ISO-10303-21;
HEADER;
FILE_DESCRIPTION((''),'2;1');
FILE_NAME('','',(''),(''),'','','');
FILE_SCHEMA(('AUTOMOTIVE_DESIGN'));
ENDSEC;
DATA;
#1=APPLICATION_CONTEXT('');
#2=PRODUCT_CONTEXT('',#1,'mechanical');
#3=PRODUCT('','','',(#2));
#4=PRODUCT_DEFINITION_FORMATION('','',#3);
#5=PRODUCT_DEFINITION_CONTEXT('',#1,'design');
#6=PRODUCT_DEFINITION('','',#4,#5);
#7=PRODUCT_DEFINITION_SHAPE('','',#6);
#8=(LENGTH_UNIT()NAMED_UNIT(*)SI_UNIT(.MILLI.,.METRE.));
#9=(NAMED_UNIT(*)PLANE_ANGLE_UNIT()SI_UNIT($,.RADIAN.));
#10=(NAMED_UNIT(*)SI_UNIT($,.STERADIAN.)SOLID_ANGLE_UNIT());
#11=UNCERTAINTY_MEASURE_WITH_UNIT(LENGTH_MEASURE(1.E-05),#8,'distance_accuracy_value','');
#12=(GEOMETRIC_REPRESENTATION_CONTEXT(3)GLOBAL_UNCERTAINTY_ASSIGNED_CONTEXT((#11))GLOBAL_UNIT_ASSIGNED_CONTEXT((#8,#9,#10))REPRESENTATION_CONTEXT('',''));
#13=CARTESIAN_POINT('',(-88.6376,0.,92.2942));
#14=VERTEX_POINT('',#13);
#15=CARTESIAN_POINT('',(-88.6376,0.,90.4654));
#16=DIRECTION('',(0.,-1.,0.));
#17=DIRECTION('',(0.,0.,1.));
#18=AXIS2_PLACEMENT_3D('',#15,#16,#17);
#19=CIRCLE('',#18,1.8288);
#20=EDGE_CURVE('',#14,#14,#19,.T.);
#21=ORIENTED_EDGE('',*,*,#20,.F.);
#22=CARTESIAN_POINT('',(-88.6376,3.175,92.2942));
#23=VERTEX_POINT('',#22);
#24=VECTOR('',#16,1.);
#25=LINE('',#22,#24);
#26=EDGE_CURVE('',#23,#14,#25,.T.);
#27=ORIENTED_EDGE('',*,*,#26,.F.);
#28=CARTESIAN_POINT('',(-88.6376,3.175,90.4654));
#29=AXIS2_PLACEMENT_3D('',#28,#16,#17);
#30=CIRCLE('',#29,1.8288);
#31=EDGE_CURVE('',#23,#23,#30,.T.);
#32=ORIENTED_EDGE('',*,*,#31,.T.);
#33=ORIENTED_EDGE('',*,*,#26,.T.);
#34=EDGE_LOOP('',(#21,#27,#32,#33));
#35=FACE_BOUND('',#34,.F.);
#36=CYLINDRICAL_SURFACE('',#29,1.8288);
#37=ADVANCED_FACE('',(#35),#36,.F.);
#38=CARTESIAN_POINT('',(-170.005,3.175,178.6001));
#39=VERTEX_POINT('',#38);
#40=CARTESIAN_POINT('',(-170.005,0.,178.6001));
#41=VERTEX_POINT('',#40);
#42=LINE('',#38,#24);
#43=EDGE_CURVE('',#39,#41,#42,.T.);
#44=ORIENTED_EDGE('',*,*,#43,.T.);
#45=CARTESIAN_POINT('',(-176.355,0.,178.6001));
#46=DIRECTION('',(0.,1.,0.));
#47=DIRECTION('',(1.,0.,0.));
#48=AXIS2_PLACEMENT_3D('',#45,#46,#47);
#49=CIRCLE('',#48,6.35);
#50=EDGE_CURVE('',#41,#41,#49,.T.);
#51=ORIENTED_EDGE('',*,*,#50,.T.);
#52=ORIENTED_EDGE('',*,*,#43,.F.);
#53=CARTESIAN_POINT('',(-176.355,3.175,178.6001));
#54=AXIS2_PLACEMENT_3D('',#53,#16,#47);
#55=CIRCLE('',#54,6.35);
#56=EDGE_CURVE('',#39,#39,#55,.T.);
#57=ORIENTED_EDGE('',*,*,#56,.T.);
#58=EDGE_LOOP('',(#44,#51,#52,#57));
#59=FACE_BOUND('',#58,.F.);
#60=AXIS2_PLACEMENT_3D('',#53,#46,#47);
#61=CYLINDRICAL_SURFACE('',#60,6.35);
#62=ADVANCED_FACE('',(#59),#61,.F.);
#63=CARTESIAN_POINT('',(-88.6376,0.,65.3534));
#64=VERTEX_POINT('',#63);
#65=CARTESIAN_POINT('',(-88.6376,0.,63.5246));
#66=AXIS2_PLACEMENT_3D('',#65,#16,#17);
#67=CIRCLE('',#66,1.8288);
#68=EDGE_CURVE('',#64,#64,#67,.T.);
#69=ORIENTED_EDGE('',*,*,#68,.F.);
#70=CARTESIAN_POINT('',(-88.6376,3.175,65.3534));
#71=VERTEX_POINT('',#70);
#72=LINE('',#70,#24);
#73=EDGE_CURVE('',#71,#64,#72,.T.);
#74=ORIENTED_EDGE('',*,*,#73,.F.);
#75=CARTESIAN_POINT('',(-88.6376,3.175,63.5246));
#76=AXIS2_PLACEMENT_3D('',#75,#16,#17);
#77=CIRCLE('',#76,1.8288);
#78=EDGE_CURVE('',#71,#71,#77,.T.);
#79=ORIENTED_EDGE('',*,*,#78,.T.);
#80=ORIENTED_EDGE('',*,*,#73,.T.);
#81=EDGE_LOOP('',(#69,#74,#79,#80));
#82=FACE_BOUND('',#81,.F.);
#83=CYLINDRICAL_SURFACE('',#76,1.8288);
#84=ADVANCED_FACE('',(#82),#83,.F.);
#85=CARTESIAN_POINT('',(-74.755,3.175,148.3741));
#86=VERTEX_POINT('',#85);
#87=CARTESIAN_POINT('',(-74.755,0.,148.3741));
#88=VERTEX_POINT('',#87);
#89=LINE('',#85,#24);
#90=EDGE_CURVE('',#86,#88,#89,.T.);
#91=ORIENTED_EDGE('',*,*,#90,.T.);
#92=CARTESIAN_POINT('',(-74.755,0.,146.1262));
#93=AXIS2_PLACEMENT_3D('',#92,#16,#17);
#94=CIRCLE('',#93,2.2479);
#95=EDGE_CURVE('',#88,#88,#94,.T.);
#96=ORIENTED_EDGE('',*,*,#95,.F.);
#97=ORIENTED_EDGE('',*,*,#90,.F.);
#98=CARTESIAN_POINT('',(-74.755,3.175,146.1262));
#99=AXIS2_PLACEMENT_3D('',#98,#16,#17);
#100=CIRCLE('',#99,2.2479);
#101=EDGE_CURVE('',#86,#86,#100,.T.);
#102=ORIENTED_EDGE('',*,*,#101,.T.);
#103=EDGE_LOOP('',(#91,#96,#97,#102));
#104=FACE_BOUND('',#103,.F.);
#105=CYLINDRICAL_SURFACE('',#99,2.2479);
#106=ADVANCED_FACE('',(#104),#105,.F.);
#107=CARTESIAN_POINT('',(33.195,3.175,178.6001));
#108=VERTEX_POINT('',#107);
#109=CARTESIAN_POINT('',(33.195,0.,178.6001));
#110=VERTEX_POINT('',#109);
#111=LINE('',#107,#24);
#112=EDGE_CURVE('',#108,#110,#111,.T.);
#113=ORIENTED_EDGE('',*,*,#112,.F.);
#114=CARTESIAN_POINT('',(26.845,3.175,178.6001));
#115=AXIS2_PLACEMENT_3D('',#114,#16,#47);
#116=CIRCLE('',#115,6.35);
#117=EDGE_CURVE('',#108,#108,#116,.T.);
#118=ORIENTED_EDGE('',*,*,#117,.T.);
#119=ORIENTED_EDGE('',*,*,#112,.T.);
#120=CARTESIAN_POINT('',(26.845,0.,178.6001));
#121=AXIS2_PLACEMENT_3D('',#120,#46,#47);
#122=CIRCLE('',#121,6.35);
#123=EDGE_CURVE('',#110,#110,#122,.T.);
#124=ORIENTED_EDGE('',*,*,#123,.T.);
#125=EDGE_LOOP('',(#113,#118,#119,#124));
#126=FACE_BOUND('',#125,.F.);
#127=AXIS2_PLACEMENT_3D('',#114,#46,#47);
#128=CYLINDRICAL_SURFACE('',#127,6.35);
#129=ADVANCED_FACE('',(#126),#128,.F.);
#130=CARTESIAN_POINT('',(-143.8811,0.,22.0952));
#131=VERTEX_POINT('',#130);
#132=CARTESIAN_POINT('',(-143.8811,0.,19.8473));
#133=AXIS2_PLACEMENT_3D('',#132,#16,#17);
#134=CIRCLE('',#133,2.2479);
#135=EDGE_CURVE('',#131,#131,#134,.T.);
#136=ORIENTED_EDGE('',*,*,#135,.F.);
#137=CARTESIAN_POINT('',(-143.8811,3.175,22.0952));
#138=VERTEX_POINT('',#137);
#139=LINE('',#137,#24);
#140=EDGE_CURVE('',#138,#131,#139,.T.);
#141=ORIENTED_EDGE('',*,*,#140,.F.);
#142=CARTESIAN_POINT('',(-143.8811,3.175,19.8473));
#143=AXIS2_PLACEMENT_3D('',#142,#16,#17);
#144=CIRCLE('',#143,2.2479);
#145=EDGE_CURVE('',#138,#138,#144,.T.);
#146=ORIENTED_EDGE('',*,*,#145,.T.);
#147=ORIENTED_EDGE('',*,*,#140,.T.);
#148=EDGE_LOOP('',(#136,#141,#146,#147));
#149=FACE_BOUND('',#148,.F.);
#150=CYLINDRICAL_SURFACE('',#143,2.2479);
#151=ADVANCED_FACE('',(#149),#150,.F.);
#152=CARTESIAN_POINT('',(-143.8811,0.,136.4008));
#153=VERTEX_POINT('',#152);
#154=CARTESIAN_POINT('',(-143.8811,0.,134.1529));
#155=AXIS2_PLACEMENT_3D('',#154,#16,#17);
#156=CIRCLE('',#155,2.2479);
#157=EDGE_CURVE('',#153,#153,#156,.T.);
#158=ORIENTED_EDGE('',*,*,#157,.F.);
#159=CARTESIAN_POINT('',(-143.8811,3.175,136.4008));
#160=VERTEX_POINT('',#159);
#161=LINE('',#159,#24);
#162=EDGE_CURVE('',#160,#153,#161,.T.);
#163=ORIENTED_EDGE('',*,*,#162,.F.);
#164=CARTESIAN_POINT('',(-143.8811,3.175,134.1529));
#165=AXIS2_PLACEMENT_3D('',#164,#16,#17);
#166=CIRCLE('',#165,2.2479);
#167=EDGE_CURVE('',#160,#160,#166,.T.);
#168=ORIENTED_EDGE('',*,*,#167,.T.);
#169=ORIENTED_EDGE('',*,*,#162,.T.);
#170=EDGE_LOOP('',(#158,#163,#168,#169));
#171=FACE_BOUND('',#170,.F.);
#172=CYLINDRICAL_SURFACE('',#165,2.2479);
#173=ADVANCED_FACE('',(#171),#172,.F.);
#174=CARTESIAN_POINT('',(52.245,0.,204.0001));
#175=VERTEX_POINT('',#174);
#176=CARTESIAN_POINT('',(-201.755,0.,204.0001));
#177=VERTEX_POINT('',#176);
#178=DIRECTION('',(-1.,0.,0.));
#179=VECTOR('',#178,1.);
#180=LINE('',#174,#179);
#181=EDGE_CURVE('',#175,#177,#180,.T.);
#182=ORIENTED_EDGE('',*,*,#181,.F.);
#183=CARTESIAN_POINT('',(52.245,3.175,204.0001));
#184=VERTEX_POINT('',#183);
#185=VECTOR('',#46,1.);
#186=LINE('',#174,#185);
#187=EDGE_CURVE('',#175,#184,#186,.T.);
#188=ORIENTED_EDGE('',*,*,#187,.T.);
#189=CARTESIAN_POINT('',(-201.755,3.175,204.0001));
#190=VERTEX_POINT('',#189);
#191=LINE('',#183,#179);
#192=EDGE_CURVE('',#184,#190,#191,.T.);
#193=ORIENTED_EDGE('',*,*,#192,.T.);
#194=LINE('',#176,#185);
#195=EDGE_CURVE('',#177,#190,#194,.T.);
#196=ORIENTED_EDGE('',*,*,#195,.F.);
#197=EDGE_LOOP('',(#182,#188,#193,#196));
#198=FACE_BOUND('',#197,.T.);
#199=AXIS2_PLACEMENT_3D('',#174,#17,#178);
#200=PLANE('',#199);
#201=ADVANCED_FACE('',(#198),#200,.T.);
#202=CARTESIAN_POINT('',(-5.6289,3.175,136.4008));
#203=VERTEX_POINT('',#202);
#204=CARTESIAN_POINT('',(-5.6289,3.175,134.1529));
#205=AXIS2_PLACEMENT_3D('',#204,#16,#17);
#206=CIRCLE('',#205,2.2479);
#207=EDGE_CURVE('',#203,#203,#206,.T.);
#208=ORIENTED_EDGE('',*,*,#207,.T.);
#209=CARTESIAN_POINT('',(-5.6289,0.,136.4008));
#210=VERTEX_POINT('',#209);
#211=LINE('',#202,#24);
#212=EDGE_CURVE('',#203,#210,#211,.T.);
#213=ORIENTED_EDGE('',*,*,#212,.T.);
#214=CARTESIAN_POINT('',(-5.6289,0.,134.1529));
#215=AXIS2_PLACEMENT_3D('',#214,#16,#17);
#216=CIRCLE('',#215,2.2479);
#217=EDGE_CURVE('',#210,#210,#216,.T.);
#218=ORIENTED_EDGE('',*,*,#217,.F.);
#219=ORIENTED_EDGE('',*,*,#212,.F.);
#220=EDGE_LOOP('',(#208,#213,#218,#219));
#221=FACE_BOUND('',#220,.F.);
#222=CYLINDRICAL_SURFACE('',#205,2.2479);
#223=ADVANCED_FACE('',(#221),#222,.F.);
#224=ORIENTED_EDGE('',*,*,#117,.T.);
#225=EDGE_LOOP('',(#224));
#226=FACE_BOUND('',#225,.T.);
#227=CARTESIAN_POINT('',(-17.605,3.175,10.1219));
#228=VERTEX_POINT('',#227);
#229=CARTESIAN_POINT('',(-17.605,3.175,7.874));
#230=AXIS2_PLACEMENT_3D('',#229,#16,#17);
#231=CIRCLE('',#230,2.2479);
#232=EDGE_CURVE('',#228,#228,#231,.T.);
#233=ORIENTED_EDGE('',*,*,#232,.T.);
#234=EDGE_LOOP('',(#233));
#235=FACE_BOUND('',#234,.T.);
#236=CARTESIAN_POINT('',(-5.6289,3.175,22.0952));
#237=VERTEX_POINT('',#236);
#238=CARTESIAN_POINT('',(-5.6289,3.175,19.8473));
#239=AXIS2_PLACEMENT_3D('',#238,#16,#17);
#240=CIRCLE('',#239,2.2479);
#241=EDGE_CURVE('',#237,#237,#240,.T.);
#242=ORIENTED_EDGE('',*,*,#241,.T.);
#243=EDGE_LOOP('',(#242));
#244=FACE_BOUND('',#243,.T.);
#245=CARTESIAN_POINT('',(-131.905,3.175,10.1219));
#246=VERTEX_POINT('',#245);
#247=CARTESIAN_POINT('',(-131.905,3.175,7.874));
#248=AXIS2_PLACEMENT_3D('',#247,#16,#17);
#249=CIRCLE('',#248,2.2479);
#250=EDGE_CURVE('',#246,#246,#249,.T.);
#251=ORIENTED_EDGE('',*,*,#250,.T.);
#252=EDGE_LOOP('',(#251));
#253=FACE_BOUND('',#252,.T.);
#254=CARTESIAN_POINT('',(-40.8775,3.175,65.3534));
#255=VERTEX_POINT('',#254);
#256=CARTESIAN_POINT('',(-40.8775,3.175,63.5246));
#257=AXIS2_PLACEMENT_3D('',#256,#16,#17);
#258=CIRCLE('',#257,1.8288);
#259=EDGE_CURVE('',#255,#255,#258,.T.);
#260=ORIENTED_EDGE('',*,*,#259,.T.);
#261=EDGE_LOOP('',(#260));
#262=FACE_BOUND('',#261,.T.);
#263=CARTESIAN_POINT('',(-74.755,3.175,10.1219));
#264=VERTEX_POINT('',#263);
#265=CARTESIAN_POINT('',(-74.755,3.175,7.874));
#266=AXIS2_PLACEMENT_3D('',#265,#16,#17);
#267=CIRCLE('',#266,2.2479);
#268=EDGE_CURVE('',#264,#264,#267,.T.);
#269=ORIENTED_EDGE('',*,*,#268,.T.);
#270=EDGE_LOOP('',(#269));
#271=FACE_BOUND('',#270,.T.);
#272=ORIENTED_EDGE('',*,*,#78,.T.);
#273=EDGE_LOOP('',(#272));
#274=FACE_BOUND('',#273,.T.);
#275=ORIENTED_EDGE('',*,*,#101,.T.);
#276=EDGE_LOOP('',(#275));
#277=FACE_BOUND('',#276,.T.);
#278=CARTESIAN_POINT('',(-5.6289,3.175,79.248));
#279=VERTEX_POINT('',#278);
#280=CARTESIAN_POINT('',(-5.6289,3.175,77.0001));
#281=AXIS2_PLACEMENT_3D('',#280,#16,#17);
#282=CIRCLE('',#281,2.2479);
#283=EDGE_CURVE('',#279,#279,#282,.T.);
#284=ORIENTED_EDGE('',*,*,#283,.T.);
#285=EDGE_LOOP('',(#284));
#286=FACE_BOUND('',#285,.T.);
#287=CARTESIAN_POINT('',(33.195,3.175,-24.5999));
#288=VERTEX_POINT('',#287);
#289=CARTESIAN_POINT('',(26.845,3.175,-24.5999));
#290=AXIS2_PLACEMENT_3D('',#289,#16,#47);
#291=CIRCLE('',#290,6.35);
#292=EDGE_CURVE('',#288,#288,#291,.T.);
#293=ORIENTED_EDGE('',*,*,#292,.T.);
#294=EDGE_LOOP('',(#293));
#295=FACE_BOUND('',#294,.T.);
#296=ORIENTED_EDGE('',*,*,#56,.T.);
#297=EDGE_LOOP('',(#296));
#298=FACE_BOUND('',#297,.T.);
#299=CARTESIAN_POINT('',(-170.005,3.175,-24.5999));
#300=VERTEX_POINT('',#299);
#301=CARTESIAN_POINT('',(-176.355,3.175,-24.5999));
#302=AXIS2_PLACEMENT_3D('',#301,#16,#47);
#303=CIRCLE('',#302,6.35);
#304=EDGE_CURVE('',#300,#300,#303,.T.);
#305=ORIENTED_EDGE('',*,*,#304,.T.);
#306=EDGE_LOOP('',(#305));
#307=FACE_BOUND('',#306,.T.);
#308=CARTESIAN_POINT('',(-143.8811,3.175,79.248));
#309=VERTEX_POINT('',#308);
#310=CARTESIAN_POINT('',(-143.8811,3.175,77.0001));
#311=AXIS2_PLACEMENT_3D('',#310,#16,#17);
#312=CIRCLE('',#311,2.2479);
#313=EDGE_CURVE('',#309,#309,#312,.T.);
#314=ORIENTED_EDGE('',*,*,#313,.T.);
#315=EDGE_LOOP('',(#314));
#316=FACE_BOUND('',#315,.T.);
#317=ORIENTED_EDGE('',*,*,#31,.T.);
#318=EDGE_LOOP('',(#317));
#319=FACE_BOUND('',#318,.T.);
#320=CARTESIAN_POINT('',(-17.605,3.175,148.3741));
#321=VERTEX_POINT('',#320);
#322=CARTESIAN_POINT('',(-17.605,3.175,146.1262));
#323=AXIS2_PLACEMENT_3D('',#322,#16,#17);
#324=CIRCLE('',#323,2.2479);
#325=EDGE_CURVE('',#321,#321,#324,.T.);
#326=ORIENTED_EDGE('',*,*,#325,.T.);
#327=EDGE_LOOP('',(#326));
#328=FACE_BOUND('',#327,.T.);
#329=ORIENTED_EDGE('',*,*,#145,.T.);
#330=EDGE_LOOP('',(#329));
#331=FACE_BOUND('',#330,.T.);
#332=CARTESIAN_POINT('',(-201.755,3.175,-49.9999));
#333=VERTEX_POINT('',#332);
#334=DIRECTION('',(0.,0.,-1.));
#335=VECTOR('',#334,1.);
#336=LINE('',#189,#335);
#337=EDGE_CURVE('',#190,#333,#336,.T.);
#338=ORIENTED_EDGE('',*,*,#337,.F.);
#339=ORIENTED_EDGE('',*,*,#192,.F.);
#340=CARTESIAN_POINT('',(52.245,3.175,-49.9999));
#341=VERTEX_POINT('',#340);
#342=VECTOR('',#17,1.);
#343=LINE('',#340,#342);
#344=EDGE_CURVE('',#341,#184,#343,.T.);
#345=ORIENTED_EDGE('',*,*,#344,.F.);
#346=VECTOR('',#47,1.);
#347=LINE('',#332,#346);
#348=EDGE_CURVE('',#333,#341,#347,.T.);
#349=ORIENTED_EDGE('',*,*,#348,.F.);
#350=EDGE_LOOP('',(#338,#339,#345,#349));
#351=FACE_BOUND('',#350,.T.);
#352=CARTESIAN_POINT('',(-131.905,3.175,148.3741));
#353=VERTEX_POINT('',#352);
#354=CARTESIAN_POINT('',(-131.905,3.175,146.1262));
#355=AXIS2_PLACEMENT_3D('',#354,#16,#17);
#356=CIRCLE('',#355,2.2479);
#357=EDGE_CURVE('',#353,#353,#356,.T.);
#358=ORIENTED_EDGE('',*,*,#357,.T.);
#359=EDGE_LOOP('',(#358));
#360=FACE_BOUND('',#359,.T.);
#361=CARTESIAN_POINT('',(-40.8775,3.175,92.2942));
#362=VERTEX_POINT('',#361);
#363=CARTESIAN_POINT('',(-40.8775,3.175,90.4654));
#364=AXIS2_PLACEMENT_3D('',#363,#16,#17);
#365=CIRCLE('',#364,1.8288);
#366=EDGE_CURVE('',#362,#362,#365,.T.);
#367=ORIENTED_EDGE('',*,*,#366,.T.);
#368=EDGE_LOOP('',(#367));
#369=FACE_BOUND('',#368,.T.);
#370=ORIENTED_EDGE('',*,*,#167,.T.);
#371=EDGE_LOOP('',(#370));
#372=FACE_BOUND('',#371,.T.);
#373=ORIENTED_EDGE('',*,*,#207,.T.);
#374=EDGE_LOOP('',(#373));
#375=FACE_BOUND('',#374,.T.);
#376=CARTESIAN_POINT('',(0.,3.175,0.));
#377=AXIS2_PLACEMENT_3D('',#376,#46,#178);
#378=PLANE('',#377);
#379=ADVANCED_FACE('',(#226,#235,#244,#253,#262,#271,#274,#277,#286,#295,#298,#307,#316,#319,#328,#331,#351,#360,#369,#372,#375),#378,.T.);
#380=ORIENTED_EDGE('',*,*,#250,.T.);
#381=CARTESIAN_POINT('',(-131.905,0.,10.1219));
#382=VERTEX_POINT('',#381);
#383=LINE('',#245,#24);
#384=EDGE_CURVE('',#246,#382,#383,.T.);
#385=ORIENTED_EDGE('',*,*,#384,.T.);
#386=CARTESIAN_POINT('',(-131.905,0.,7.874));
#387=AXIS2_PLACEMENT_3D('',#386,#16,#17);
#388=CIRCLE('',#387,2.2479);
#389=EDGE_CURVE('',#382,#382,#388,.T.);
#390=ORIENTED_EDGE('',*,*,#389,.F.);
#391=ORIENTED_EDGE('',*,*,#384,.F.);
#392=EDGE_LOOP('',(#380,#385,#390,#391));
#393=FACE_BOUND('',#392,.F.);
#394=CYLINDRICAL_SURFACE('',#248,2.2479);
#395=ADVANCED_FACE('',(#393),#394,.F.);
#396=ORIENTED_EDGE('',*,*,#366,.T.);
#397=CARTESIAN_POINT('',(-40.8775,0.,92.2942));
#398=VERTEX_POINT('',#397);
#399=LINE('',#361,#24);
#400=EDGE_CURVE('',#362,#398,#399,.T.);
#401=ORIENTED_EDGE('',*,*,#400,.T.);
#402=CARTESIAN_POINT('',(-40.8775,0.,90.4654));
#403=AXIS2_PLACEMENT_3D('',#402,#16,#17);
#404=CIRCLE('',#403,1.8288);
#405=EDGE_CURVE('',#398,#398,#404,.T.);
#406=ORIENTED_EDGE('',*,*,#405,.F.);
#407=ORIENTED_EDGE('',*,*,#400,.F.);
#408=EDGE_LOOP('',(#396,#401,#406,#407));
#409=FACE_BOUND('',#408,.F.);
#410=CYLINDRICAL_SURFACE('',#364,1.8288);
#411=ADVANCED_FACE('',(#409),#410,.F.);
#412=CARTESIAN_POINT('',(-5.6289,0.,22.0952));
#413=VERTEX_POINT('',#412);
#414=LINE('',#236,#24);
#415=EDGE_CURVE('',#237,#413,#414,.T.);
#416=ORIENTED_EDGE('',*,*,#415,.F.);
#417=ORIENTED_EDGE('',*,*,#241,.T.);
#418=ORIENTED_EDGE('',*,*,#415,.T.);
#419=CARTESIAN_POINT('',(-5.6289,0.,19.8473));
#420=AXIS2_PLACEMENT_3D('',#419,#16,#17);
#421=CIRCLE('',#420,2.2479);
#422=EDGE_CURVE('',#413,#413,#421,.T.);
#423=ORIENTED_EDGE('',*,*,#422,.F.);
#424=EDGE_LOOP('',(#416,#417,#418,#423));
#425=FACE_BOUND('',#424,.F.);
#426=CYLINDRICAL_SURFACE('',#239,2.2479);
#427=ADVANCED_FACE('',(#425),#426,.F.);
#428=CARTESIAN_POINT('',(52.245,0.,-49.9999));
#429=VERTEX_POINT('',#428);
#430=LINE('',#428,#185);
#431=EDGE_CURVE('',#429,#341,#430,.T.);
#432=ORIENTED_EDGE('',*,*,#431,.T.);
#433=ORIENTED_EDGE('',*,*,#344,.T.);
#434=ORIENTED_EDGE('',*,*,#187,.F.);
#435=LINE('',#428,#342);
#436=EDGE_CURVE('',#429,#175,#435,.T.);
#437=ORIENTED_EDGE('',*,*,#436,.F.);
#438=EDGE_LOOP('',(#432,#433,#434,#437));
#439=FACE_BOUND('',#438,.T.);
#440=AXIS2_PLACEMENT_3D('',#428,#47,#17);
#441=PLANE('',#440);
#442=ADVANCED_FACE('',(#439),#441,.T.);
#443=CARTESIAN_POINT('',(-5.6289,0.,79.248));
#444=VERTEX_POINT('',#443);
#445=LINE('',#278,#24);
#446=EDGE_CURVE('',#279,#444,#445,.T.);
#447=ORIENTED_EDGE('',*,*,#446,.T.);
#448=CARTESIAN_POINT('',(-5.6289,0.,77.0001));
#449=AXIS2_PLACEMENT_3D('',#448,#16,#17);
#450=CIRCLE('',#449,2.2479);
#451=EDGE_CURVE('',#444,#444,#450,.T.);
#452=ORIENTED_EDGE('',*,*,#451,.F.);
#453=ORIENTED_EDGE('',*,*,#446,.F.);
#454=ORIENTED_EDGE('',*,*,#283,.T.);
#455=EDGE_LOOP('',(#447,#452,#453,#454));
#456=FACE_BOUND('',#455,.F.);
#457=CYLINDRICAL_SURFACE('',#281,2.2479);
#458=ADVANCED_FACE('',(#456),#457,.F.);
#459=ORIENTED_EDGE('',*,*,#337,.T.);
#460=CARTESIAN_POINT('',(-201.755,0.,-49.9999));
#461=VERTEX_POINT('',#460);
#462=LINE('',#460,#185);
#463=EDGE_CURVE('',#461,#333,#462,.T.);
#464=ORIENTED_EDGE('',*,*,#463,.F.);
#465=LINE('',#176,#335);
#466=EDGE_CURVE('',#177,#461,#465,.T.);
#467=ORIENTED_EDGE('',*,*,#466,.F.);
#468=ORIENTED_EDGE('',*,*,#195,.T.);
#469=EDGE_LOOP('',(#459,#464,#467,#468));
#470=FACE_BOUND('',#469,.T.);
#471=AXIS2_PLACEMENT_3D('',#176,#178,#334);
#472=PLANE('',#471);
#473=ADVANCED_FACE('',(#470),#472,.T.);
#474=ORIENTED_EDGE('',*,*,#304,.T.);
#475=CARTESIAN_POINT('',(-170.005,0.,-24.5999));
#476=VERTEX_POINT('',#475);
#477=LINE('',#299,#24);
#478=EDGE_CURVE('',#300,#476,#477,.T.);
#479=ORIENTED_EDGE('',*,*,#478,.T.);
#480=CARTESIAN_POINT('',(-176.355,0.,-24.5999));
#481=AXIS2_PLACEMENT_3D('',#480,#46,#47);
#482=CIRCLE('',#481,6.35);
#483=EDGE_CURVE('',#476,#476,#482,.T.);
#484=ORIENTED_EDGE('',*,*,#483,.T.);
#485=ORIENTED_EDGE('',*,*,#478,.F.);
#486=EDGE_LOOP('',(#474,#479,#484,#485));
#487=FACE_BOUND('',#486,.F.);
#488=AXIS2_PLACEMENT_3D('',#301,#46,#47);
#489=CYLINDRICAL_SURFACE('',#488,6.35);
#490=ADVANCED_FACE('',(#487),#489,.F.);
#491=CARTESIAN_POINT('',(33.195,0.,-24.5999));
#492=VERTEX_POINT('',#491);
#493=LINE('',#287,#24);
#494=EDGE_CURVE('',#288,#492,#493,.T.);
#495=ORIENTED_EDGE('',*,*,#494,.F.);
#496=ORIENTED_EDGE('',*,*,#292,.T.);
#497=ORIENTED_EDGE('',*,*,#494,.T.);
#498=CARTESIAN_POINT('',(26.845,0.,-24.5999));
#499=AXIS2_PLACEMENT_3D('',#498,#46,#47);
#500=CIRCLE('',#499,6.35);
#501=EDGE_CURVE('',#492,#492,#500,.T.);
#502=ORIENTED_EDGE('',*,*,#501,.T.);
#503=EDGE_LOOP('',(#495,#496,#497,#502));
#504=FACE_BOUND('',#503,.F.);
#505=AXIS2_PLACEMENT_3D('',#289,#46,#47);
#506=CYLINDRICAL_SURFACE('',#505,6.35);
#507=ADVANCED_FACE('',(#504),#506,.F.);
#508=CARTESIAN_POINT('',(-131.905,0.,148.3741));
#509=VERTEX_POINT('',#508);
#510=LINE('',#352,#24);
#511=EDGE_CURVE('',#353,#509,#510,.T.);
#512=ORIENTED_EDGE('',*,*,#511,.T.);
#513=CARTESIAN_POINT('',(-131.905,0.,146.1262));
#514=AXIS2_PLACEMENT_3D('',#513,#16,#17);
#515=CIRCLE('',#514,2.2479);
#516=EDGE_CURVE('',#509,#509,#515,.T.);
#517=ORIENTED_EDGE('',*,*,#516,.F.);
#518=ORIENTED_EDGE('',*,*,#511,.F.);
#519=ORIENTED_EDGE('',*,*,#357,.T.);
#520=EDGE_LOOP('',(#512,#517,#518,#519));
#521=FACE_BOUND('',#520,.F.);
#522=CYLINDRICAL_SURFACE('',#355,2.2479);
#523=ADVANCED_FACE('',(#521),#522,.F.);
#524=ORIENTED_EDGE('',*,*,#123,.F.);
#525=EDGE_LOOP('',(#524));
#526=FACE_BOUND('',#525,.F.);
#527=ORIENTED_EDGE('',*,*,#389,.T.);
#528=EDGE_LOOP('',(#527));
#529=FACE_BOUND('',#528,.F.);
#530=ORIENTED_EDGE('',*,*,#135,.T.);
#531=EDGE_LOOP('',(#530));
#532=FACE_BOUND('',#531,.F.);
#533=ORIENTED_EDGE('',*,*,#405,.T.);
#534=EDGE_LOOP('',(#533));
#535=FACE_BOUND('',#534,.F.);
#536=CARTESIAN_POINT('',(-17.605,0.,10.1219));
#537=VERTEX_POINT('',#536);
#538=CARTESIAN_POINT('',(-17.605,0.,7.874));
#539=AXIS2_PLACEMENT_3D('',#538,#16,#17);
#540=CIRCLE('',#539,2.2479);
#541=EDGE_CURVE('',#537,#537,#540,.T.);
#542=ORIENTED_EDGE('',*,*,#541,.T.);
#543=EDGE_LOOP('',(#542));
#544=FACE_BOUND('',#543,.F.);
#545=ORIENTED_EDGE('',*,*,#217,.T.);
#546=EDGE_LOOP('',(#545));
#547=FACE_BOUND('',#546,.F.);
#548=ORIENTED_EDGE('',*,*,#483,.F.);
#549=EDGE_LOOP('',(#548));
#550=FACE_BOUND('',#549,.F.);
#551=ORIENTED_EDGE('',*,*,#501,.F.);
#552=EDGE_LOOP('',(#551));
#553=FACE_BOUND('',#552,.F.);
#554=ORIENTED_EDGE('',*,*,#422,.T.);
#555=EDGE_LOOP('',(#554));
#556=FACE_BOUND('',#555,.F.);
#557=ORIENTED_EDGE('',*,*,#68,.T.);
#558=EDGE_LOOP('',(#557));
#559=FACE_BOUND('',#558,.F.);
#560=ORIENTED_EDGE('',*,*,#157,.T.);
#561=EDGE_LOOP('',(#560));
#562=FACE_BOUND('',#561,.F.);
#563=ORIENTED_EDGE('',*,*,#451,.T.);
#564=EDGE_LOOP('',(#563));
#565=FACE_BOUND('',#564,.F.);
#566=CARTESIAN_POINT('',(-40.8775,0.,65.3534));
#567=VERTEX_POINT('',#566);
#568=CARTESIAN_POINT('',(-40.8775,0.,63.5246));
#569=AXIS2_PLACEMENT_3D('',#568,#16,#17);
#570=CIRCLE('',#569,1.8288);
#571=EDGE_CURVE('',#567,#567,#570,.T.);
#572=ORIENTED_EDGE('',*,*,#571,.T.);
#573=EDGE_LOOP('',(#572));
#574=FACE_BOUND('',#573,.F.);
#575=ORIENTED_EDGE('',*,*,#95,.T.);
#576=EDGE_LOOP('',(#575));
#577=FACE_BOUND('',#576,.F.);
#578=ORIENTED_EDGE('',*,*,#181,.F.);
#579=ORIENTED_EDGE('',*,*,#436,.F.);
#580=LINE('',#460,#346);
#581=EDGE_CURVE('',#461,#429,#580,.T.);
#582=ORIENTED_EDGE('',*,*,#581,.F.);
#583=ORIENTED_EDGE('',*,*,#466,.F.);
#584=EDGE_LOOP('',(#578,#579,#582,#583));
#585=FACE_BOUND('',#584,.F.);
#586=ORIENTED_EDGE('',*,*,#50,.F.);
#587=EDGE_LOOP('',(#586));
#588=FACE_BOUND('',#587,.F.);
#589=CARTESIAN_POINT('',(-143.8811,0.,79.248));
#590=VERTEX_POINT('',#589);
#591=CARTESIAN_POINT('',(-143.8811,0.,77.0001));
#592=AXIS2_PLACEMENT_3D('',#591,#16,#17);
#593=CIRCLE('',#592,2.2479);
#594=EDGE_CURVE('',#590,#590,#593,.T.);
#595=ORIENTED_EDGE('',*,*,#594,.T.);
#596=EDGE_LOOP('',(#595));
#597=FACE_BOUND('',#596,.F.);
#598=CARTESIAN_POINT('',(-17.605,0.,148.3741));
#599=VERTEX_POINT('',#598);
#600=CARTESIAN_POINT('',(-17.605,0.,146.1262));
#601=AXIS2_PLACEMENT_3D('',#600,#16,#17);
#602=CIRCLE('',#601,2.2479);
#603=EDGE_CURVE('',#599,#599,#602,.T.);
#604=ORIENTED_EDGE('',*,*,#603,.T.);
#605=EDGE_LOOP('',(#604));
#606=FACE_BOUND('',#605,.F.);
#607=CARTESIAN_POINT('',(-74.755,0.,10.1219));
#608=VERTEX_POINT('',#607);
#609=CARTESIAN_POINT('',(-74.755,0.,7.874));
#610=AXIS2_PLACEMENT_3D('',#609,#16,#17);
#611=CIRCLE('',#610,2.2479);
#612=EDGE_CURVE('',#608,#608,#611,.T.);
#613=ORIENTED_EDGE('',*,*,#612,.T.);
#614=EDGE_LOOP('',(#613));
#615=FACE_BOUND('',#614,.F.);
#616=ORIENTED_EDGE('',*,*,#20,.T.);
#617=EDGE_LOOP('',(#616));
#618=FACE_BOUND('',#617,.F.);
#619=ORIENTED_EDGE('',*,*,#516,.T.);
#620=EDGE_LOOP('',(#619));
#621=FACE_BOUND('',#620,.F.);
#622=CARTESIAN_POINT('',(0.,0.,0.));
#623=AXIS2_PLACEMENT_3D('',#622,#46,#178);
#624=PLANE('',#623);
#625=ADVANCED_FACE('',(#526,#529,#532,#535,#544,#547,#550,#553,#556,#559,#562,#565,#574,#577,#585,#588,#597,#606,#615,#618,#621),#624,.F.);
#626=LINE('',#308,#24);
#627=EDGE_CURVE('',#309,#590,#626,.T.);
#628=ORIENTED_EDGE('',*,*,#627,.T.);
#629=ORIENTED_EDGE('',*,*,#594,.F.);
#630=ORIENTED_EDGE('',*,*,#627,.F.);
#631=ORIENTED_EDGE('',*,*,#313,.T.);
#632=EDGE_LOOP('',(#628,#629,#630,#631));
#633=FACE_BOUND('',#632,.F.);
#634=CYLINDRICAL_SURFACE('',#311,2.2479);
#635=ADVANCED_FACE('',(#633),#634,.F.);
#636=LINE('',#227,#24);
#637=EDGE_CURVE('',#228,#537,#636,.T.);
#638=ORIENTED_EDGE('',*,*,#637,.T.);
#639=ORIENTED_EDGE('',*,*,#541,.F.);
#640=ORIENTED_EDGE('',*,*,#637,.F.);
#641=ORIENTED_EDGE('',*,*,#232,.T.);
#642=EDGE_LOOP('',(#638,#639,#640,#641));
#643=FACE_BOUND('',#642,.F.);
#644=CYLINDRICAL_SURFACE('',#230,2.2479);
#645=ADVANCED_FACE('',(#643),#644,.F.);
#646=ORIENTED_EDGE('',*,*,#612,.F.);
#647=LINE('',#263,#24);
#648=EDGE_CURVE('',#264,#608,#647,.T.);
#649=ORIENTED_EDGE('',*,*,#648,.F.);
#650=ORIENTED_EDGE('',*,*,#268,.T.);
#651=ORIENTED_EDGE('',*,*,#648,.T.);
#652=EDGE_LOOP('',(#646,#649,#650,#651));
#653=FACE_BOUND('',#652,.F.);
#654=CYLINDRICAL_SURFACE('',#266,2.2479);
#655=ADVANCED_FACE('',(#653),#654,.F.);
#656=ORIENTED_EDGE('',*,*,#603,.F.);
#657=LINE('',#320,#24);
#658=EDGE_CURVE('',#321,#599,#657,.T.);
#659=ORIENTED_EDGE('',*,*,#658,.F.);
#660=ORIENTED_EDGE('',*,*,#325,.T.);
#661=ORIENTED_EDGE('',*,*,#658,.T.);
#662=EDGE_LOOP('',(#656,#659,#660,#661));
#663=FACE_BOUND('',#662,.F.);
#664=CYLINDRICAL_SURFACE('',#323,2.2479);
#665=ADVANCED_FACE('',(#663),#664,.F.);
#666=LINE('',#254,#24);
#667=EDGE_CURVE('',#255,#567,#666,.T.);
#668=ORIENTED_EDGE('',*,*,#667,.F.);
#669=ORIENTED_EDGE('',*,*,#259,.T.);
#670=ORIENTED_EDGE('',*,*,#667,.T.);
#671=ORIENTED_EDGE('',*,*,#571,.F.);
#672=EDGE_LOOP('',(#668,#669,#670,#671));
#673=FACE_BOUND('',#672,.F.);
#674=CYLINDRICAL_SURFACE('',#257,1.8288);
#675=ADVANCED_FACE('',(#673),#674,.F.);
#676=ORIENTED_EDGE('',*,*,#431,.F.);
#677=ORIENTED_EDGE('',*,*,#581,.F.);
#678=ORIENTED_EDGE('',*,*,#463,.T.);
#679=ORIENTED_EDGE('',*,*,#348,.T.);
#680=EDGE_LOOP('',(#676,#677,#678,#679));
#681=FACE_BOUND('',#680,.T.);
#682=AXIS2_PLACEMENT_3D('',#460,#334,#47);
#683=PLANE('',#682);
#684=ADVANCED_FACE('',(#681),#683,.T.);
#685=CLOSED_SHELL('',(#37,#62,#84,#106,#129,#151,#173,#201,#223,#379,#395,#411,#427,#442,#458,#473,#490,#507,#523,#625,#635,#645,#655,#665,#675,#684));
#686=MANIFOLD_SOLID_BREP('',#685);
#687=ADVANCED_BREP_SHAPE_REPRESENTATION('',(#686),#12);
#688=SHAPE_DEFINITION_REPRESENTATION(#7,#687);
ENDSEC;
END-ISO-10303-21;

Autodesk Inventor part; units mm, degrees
ref_plane "YZ Plane" through (0, 0, 0) normal (1, 0, 0) x (0, 1, 0)
ref_plane "XZ Plane" through (0, 0, 0) normal (0, 1, 0) x (-1, 0, 0)
ref_plane "XY Plane" through (0, 0, 0) normal (0, 0, 1) x (1, 0, 0)
sketch "Sketch1" plane through (0, 0, 0) normal (0, 1, 0) x (-1, 0, 0)
  line L0 (-2.2451, 151.7551) -> (-2.2451, 2.2451)
  line L1 (16.8049, 21.2951) -> (-2.2451, 2.2451)
  line L2 (16.8049, 132.7051) -> (16.8049, 21.2951)
  line L3 (-2.2451, 151.7551) -> (16.8049, 132.7051)
  line L4 (0, 0) -> (149.5101, 0)
  line L5 (130.4601, 19.05) -> (149.5101, 0)
  line L6 (19.05, 19.05) -> (130.4601, 19.05)
  line L7 (0, 0) -> (19.05, 19.05)
  line L8 (151.7551, 2.2451) -> (151.7551, 151.7551)
  line L9 (132.7051, 132.7051) -> (151.7551, 151.7551)
  line L10 (132.7051, 21.2951) -> (132.7051, 132.7051)
  line L11 (151.7551, 2.2451) -> (132.7051, 21.2951)
  line L12 (149.5101, 154.0002) -> (0, 154.0002)
  line L13 (19.05, 134.9502) -> (0, 154.0002)
  line L14 (130.4601, 134.9502) -> (19.05, 134.9502)
  line L15 (149.5101, 154.0002) -> (130.4601, 134.9502)
  line L16 (9.525, 144.4752) -> (139.9851, 144.4752) construction
  line L17 (149.5101, 154.0002) -> (130.4601, 134.9502) construction
  line L18 (151.7551, 151.7551) -> (132.7051, 132.7051) construction
  line L19 (142.2301, 142.2301) -> (142.2301, 11.7701) construction
  line L20 (130.4601, 19.05) -> (149.5101, 0) construction
  line L21 (139.9851, 9.525) -> (9.525, 9.525) construction
  line L22 (0, 0) -> (19.05, 19.05) construction
  line L23 (-2.2451, 2.2451) -> (16.8049, 21.2951) construction
  line L24 (7.2799, 11.7701) -> (7.2799, 142.2301) construction
  circle A0 centre (142.2301, 77.0001) radius 3.175
  circle A1 centre (74.755, 9.525) radius 3.175
  circle A2 centre (7.2799, 77.0001) radius 3.175
  circle A3 centre (74.755, 144.4752) radius 3.175
  circle A4 centre (112.855, 144.4752) radius 3.175
  circle A5 centre (36.655, 144.4752) radius 3.175
  circle A6 centre (74.755, 144.4752) radius 3.175
  circle A7 centre (7.2799, 38.9001) radius 3.175
  circle A8 centre (7.2799, 115.1001) radius 3.175
  circle A9 centre (7.2799, 77.0001) radius 3.175
  circle A10 centre (142.2301, 115.1001) radius 3.175
  circle A11 centre (142.2301, 38.9001) radius 3.175
  circle A12 centre (142.2301, 77.0001) radius 3.175
  circle A13 centre (36.655, 9.525) radius 3.175
  circle A14 centre (112.855, 9.525) radius 3.175
  circle A15 centre (74.755, 9.525) radius 3.175
  circle A16 centre (74.755, 77.0001) radius 57.9501 construction
  line L25 (-52.245, 204.0001) -> (201.755, 204.0001)
  line L26 (201.755, 204.0001) -> (201.755, -49.9999)
  line L27 (201.755, -49.9999) -> (-52.245, -49.9999)
  line L28 (-52.245, -49.9999) -> (-52.245, 204.0001)
  line L29 (-52.245, 204.0001) -> (201.755, -49.9999) construction
  line L30 (201.755, 204.0001) -> (-52.245, -49.9999) construction
  point P0 (151.7551, 0)
  dimension "d16" = 19.05
  dimension "d17" = 19.05
  dimension "d18" = 19.05
  dimension "d19" = 19.05
  dimension "d20" = 6.35
  dimension "d21" = 6.35
  dimension "d22" = 6.35
  dimension "d23" = 6.35
  dimension "d24" = 65.23
  dimension "d25" = 9.525
  dimension "d26" = 38.1
  dimension "d27" = 38.1
  dimension "d28" = 38.1
  dimension "d29" = 38.1
  dimension "d30" = 38.1
  dimension "d31" = 38.1
  dimension "d32" = 38.1
  dimension "d33" = 38.1
  dimension "d34" = 90
  dimension "d35" = 45
  dimension "d36" = 90
  dimension "d37" = 90
  dimension "d38" = 90
  dimension "d39" = 3.175
  dimension "d40" = 19.05
  dimension "d41" = 19.05
  dimension "d42" = 134.9502
  dimension "d43" = 154.0002
  dimension "d44" = 288.9504
  dimension "d45" = 154.0002
  dimension "d46" = 6.35
  dimension "d47" = 0
  dimension "d48" = 108.8946
  dimension "d49" = 151.7551
  dimension "d50" = 154.0002
  dimension "d51" = 6.35
  dimension "d52" = 211.4392
  dimension "d53" = 108.8946
  dimension "d54" = 3.175
  dimension "d55" = 214.6142
  dimension "d56" = 1.5875
  dimension "d57" = 254
  dimension "d58" = 254
extrude "Plate1" add sketch "Sketch1" along normal blind 3.175 contours L3 L2 L1 L0 | L7 L6 L5 L4 | L11 L10 L9 L8 | L15 L14 L13 L12 | A0 | A1 | A2 | A3 | A4 | A5 | A7 | A8 | A10 | A11 | A13 | A14 | L25 L26 L27 L28
sketch "Sketch2" plane through (0, 3.175, 0) normal (0, 1, 0) x (1, 0, 0)
  line L0 (-201.755, 49.9999) -> (52.245, 49.9999) projected
  line L1 (-201.755, -204.0001) -> (-201.755, 49.9999) projected
  line L2 (52.245, -204.0001) -> (-201.755, -204.0001) projected
  line L3 (52.245, 49.9999) -> (52.245, -204.0001) projected
  line L4 (26.845, 24.5999) -> (-176.355, 24.5999)
  line L5 (-176.355, 24.5999) -> (-176.355, -178.6001)
  line L6 (-176.355, -178.6001) -> (26.845, -178.6001)
  line L7 (26.845, -178.6001) -> (26.845, 24.5999)
  circle A0 centre (-176.355, 24.5999) radius 6.35
  circle A1 centre (26.845, 24.5999) radius 6.35
  circle A2 centre (-176.355, -178.6001) radius 6.35
  circle A3 centre (26.845, -178.6001) radius 6.35
  point P0 (0, 0)
  dimension "d60" = 203.2
  dimension "d61" = 12.7
  dimension "d62" = 12.7
  dimension "d63" = 12.7
  dimension "d64" = 12.7
extrude "Cut1" cut sketch "Sketch2" against normal blind 3.175 contours A0 L5 L4 | L4 L5 A0 | A1 L7 L4 | L4 L7 A1 | A2 L6 L5 | L5 L6 A2 | A3 L6 L7 | L7 L6 A3
sketch "Sketch7" plane through (-64.7482, 0, 77.0128) normal (0, 1, 0) x (0, 0, 1)
  line L0 (15.2484, -23.8801) -> (15.2484, -22.1021)
  arc A0 (11.6924, -23.8801) -> (15.2484, -23.8801) centre (13.4704, -23.8801) ccw
  line L1 (11.6924, -22.1021) -> (11.6924, -23.8801)
  arc A1 (15.2484, -22.1021) -> (11.6924, -22.1021) centre (13.4704, -22.1021) ccw
  line L2 (11.6924, 23.8801) -> (11.6924, 22.1021)
  arc A2 (15.2484, 23.8801) -> (11.6924, 23.8801) centre (13.4704, 23.8801) ccw
  line L3 (15.2484, 22.1021) -> (15.2484, 23.8801)
  arc A3 (11.6924, 22.1021) -> (15.2484, 22.1021) centre (13.4704, 22.1021) ccw
  line L4 (11.6924, 15.9807) -> (11.6924, 14.2027)
  arc A4 (15.2484, 15.9807) -> (11.6924, 15.9807) centre (13.4704, 15.9807) ccw
  line L5 (15.2484, 14.2027) -> (15.2484, 15.9807)
  arc A5 (11.6924, 14.2027) -> (15.2484, 14.2027) centre (13.4704, 14.2027) ccw
  line L6 (15.2484, 3.0607) -> (15.2484, 4.8387)
  arc A6 (11.6924, 3.0607) -> (15.2484, 3.0607) centre (13.4704, 3.0607) ccw
  line L7 (11.6924, 4.8387) -> (11.6924, 3.0607)
  arc A7 (15.2484, 4.8387) -> (11.6924, 4.8387) centre (13.4704, 4.8387) ccw
  line L8 (15.2484, -4.8387) -> (15.2484, -3.0607)
  arc A8 (11.6924, -4.8387) -> (15.2484, -4.8387) centre (13.4704, -4.8387) ccw
  line L9 (11.6924, -3.0607) -> (11.6924, -4.8387)
  arc A9 (15.2484, -3.0607) -> (11.6924, -3.0607) centre (13.4704, -3.0607) ccw
  line L10 (15.2484, -15.9807) -> (15.2484, -14.2027)
  arc A10 (11.6924, -15.9807) -> (15.2484, -15.9807) centre (13.4704, -15.9807) ccw
  line L11 (11.6924, -14.2027) -> (11.6924, -15.9807)
  arc A11 (15.2484, -14.2027) -> (11.6924, -14.2027) centre (13.4704, -14.2027) ccw
  line L12 (-15.2484, 23.8801) -> (-15.2484, 22.1021)
  arc A12 (-11.6924, 23.8801) -> (-15.2484, 23.8801) centre (-13.4704, 23.8801) ccw
  line L13 (-11.6924, 22.1021) -> (-11.6924, 23.8801)
  arc A13 (-15.2484, 22.1021) -> (-11.6924, 22.1021) centre (-13.4704, 22.1021) ccw
  line L14 (-15.2484, 15.9807) -> (-15.2484, 14.2027)
  arc A14 (-11.6924, 15.9807) -> (-15.2484, 15.9807) centre (-13.4704, 15.9807) ccw
  line L15 (-11.6924, 14.2027) -> (-11.6924, 15.9807)
  arc A15 (-15.2484, 14.2027) -> (-11.6924, 14.2027) centre (-13.4704, 14.2027) ccw
  line L16 (-11.6924, 3.0607) -> (-11.6924, 4.8387)
  arc A16 (-15.2484, 3.0607) -> (-11.6924, 3.0607) centre (-13.4704, 3.0607) ccw
  line L17 (-15.2484, 4.8387) -> (-15.2484, 3.0607)
  arc A17 (-11.6924, 4.8387) -> (-15.2484, 4.8387) centre (-13.4704, 4.8387) ccw
  line L18 (-11.6924, -4.8387) -> (-11.6924, -3.0607)
  arc A18 (-15.2484, -4.8387) -> (-11.6924, -4.8387) centre (-13.4704, -4.8387) ccw
  line L19 (-15.2484, -3.0607) -> (-15.2484, -4.8387)
  arc A19 (-11.6924, -3.0607) -> (-15.2484, -3.0607) centre (-13.4704, -3.0607) ccw
  line L20 (-11.6924, -15.9807) -> (-11.6924, -14.2027)
  arc A20 (-15.2484, -15.9807) -> (-11.6924, -15.9807) centre (-13.4704, -15.9807) ccw
  line L21 (-15.2484, -14.2027) -> (-15.2484, -15.9807)
  arc A21 (-11.6924, -14.2027) -> (-15.2484, -14.2027) centre (-13.4704, -14.2027) ccw
  line L22 (-11.6924, -23.8801) -> (-11.6924, -22.1021)
  arc A22 (-15.2484, -23.8801) -> (-11.6924, -23.8801) centre (-13.4704, -23.8801) ccw
  line L23 (-15.2484, -22.1021) -> (-15.2484, -23.8801)
  arc A23 (-11.6924, -22.1021) -> (-15.2484, -22.1021) centre (-13.4704, -22.1021) ccw
  arc A24 (6.3525, -24) -> (3.6475, -24) centre (5, -24) ccw
  arc A25 (3.6475, -24) -> (6.3525, -24) centre (5, -24) ccw
  arc A26 (6.3525, 24) -> (3.6475, 24) centre (5, 24) ccw
  arc A27 (3.6475, 24) -> (6.3525, 24) centre (5, 24) ccw
  line L24 (-10.16, 20.828) -> (-10.16, -20.828)
  arc A28 (-6.096, 20.828) -> (-10.16, 20.828) centre (-8.128, 20.828) ccw
  line L25 (-2.3813, 20.828) -> (-6.096, 20.828)
  line L26 (-2.3813, 25.908) -> (-2.3813, 20.828)
  arc A29 (2.3812, 25.908) -> (-2.3813, 25.908) centre (0, 25.908) ccw
  line L27 (2.3812, 20.828) -> (2.3812, 25.908)
  line L28 (6.096, 20.828) -> (2.3812, 20.828)
  arc A30 (10.16, 20.828) -> (6.096, 20.828) centre (8.128, 20.828) ccw
  line L29 (10.16, -20.828) -> (10.16, 20.828)
  arc A31 (6.096, -20.828) -> (10.16, -20.828) centre (8.128, -20.828) ccw
  line L30 (2.3813, -20.828) -> (6.096, -20.828)
  line L31 (2.3813, -25.908) -> (2.3813, -20.828)
  arc A32 (-2.3812, -25.908) -> (2.3813, -25.908) centre (0, -25.908) ccw
  line L32 (-2.3813, -20.828) -> (-2.3812, -25.908)
  line L33 (-6.096, -20.828) -> (-2.3813, -20.828)
  arc A33 (-10.16, -20.828) -> (-6.096, -20.828) centre (-8.128, -20.828) ccw
  arc A34 (-4.572, -28.448) -> (4.572, -28.448) centre (0, -24.8232) ccw
  line L34 (4.572, -28.448) -> (13.462, -28.448)
  arc A35 (13.462, -28.448) -> (16.637, -25.273) centre (13.462, -25.273) ccw
  line L35 (16.637, -25.273) -> (16.637, 25.273)
  arc A36 (16.637, 25.273) -> (13.462, 28.448) centre (13.462, 25.273) ccw
  line L36 (13.462, 28.448) -> (4.572, 28.448)
  arc A37 (4.572, 28.448) -> (-4.572, 28.448) centre (0, 24.8232) ccw
  line L37 (-4.572, 28.448) -> (-13.462, 28.448)
  arc A38 (-13.462, 28.448) -> (-16.637, 25.273) centre (-13.462, 25.273) ccw
  line L38 (-16.637, 25.273) -> (-16.637, -25.273)
  arc A39 (-16.637, -25.273) -> (-13.462, -28.448) centre (-13.462, -25.273) ccw
  line L39 (-13.462, -28.448) -> (-4.572, -28.448)
  arc A40 (-3.6475, 24) -> (-6.3525, 24) centre (-5, 24) ccw
  arc A41 (-6.3525, 24) -> (-3.6475, 24) centre (-5, 24) ccw
  arc A42 (-3.6475, -24) -> (-6.3525, -24) centre (-5, -24) ccw
  arc A43 (-6.3525, -24) -> (-3.6475, -24) centre (-5, -24) ccw
  line L40 (15.2484, -23.8801) -> (15.2484, -22.1021)
  arc A44 (11.6924, -23.8801) -> (15.2484, -23.8801) centre (13.4704, -23.8801) ccw
  line L41 (11.6924, -22.1021) -> (11.6924, -23.8801)
  arc A45 (15.2484, -22.1021) -> (11.6924, -22.1021) centre (13.4704, -22.1021) ccw
  line L42 (11.6924, 23.8801) -> (11.6924, 22.1021)
  arc A46 (15.2484, 23.8801) -> (11.6924, 23.8801) centre (13.4704, 23.8801) ccw
  line L43 (15.2484, 22.1021) -> (15.2484, 23.8801)
  arc A47 (11.6924, 22.1021) -> (15.2484, 22.1021) centre (13.4704, 22.1021) ccw
  line L44 (11.6924, 15.9807) -> (11.6924, 14.2027)
  arc A48 (15.2484, 15.9807) -> (11.6924, 15.9807) centre (13.4704, 15.9807) ccw
  line L45 (15.2484, 14.2027) -> (15.2484, 15.9807)
  arc A49 (11.6924, 14.2027) -> (15.2484, 14.2027) centre (13.4704, 14.2027) ccw
  line L46 (15.2484, 3.0607) -> (15.2484, 4.8387)
  arc A50 (11.6924, 3.0607) -> (15.2484, 3.0607) centre (13.4704, 3.0607) ccw
  line L47 (11.6924, 4.8387) -> (11.6924, 3.0607)
  arc A51 (15.2484, 4.8387) -> (11.6924, 4.8387) centre (13.4704, 4.8387) ccw
  line L48 (15.2484, -4.8387) -> (15.2484, -3.0607)
  arc A52 (11.6924, -4.8387) -> (15.2484, -4.8387) centre (13.4704, -4.8387) ccw
  line L49 (11.6924, -3.0607) -> (11.6924, -4.8387)
  arc A53 (15.2484, -3.0607) -> (11.6924, -3.0607) centre (13.4704, -3.0607) ccw
  line L50 (15.2484, -15.9807) -> (15.2484, -14.2027)
  arc A54 (11.6924, -15.9807) -> (15.2484, -15.9807) centre (13.4704, -15.9807) ccw
  line L51 (11.6924, -14.2027) -> (11.6924, -15.9807)
  arc A55 (15.2484, -14.2027) -> (11.6924, -14.2027) centre (13.4704, -14.2027) ccw
  line L52 (-15.2484, 23.8801) -> (-15.2484, 22.1021)
  arc A56 (-11.6924, 23.8801) -> (-15.2484, 23.8801) centre (-13.4704, 23.8801) ccw
  line L53 (-11.6924, 22.1021) -> (-11.6924, 23.8801)
  arc A57 (-15.2484, 22.1021) -> (-11.6924, 22.1021) centre (-13.4704, 22.1021) ccw
  line L54 (-15.2484, 15.9807) -> (-15.2484, 14.2027)
  arc A58 (-11.6924, 15.9807) -> (-15.2484, 15.9807) centre (-13.4704, 15.9807) ccw
  line L55 (-11.6924, 14.2027) -> (-11.6924, 15.9807)
  arc A59 (-15.2484, 14.2027) -> (-11.6924, 14.2027) centre (-13.4704, 14.2027) ccw
  line L56 (-11.6924, 3.0607) -> (-11.6924, 4.8387)
  arc A60 (-15.2484, 3.0607) -> (-11.6924, 3.0607) centre (-13.4704, 3.0607) ccw
  line L57 (-15.2484, 4.8387) -> (-15.2484, 3.0607)
  arc A61 (-11.6924, 4.8387) -> (-15.2484, 4.8387) centre (-13.4704, 4.8387) ccw
  line L58 (-11.6924, -4.8387) -> (-11.6924, -3.0607)
  arc A62 (-15.2484, -4.8387) -> (-11.6924, -4.8387) centre (-13.4704, -4.8387) ccw
  line L59 (-15.2484, -3.0607) -> (-15.2484, -4.8387)
  arc A63 (-11.6924, -3.0607) -> (-15.2484, -3.0607) centre (-13.4704, -3.0607) ccw
  line L60 (-11.6924, -15.9807) -> (-11.6924, -14.2027)
  arc A64 (-15.2484, -15.9807) -> (-11.6924, -15.9807) centre (-13.4704, -15.9807) ccw
  line L61 (-15.2484, -14.2027) -> (-15.2484, -15.9807)
  arc A65 (-11.6924, -14.2027) -> (-15.2484, -14.2027) centre (-13.4704, -14.2027) ccw
  line L62 (-11.6924, -23.8801) -> (-11.6924, -22.1021)
  arc A66 (-15.2484, -23.8801) -> (-11.6924, -23.8801) centre (-13.4704, -23.8801) ccw
  line L63 (-15.2484, -22.1021) -> (-15.2484, -23.8801)
  arc A67 (-11.6924, -22.1021) -> (-15.2484, -22.1021) centre (-13.4704, -22.1021) ccw
  arc A68 (6.3525, -24) -> (3.6475, -24) centre (5, -24) ccw
  arc A69 (3.6475, -24) -> (6.3525, -24) centre (5, -24) ccw
  arc A70 (6.3525, 24) -> (3.6475, 24) centre (5, 24) ccw
  arc A71 (3.6475, 24) -> (6.3525, 24) centre (5, 24) ccw
  line L64 (-10.16, 20.828) -> (-10.16, -20.828)
  arc A72 (-6.096, 20.828) -> (-10.16, 20.828) centre (-8.128, 20.828) ccw
  line L65 (-2.3813, 20.828) -> (-6.096, 20.828)
  line L66 (-2.3813, 25.908) -> (-2.3813, 20.828)
  arc A73 (2.3812, 25.908) -> (-2.3813, 25.908) centre (0, 25.908) ccw
  line L67 (2.3812, 20.828) -> (2.3812, 25.908)
  line L68 (6.096, 20.828) -> (2.3812, 20.828)
  arc A74 (10.16, 20.828) -> (6.096, 20.828) centre (8.128, 20.828) ccw
  line L69 (10.16, -20.828) -> (10.16, 20.828)
  arc A75 (6.096, -20.828) -> (10.16, -20.828) centre (8.128, -20.828) ccw
  line L70 (2.3813, -20.828) -> (6.096, -20.828)
  line L71 (2.3813, -25.908) -> (2.3813, -20.828)
  arc A76 (-2.3812, -25.908) -> (2.3813, -25.908) centre (0, -25.908) ccw
  line L72 (-2.3813, -20.828) -> (-2.3812, -25.908)
  line L73 (-6.096, -20.828) -> (-2.3813, -20.828)
  arc A77 (-10.16, -20.828) -> (-6.096, -20.828) centre (-8.128, -20.828) ccw
  arc A78 (-4.572, -28.448) -> (4.572, -28.448) centre (0, -24.8232) ccw
  line L74 (4.572, -28.448) -> (13.462, -28.448)
  arc A79 (13.462, -28.448) -> (16.637, -25.273) centre (13.462, -25.273) ccw
  line L75 (16.637, -25.273) -> (16.637, 25.273)
  arc A80 (16.637, 25.273) -> (13.462, 28.448) centre (13.462, 25.273) ccw
  line L76 (13.462, 28.448) -> (4.572, 28.448)
  arc A81 (4.572, 28.448) -> (-4.572, 28.448) centre (0, 24.8232) ccw
  line L77 (-4.572, 28.448) -> (-13.462, 28.448)
  arc A82 (-13.462, 28.448) -> (-16.637, 25.273) centre (-13.462, 25.273) ccw
  line L78 (-16.637, 25.273) -> (-16.637, -25.273)
  arc A83 (-16.637, -25.273) -> (-13.462, -28.448) centre (-13.462, -25.273) ccw
  line L79 (-13.462, -28.448) -> (-4.572, -28.448)
  arc A84 (-3.6475, 24) -> (-6.3525, 24) centre (-5, 24) ccw
  arc A85 (-6.3525, 24) -> (-3.6475, 24) centre (-5, 24) ccw
  arc A86 (-3.6475, -24) -> (-6.3525, -24) centre (-5, -24) ccw
  arc A87 (-6.3525, -24) -> (-3.6475, -24) centre (-5, -24) ccw
  circle A88 centre (13.4704, -23.8801) radius 1.778
  circle A89 centre (13.4704, 23.8801) radius 1.778
  circle A90 centre (13.4704, -4.8387) radius 1.778
  circle A91 centre (13.4704, 4.8387) radius 1.778
  circle A92 centre (-13.4704, -23.8801) radius 1.778
  circle A93 centre (-13.4704, 23.8801) radius 1.778
  circle A94 centre (-13.4704, -4.8387) radius 1.778
  circle A95 centre (-13.4704, 4.8387) radius 1.778
  point P0 (0, 0)
  point P1 (0, 0)
hole "Hole1" [suppressed]
sketch "Sketch8" plane through (0, 3.175, 0) normal (0, 1, 0) x (1, 0, 0)
  circle A0 centre (-88.6376, -63.5246) radius 1.778
  circle A1 centre (-88.6376, -90.4654) radius 1.778
  circle A2 centre (-40.8775, -63.5246) radius 1.778
  circle A3 centre (-40.8775, -90.4654) radius 1.778
  point P0 (0, 0)
  point P1 (-88.6376, -63.5246)
  point P2 (-88.6376, -90.4654)
  point P3 (-40.8775, -63.5246)
  point P4 (-40.8775, -90.4654)
hole "Hole2" at (-88.6376, 3.175, 63.5246) at (-88.6376, 3.175, 90.4654) at (-40.8775, 3.175, 63.5246) at (-40.8775, 3.175, 90.4654) direction (0, -1, 0) diameter 3.6576 end through all clearance for "Flat Head Machine Screw (82)" size "#6" standard "Ansi Unified Screw Threads"
sketch "Sketch9" plane through (0, 3.175, 0) normal (0, 1, 0) x (1, 0, 0)
  circle A0 centre (-88.6376, -63.5246) radius 1.8288 projected
  circle A1 centre (-40.8775, -63.5246) radius 1.8288 projected
  circle A2 centre (-40.8775, -90.4654) radius 1.8288 projected
  circle A3 centre (-88.6376, -90.4654) radius 1.8288 projected
  line L0 (-201.755, 49.9999) -> (52.245, 49.9999) projected
  line L1 (52.245, 49.9999) -> (52.245, -204.0001) projected
  line L2 (-201.755, -204.0001) -> (-201.755, 49.9999) projected
  line L3 (52.245, -204.0001) -> (-201.755, -204.0001) projected
  point P0 (0, 0)
  dimension "d90" = 93.1224
  dimension "d91" = 113.5245
sketch "Sketch10" plane through (0, 3.175, 0) normal (0, 1, 0) x (1, 0, 0)
  circle A0 centre (-17.605, -7.874) radius 2.2479 projected
  circle A1 centre (-5.6289, -19.8473) radius 2.2479 projected
  circle A2 centre (-5.6289, -77.0001) radius 2.2479 projected
  circle A3 centre (-5.6289, -134.1529) radius 2.2479 projected
  circle A4 centre (-17.605, -146.1262) radius 2.2479 projected
  circle A5 centre (-74.755, -146.1262) radius 2.2479 projected
  circle A6 centre (-131.905, -146.1262) radius 2.2479 projected
  circle A7 centre (-143.8811, -134.1529) radius 2.2479 projected
  circle A8 centre (-143.8811, -77.0001) radius 2.2479 projected
  circle A9 centre (-143.8811, -19.8473) radius 2.2479 projected
  circle A10 centre (-131.905, -7.874) radius 2.2479 projected
  circle A11 centre (-74.755, -7.874) radius 2.2479 projected
  circle A12 centre (-17.605, -7.874) radius 2.2479 projected
  point P0 (0, 0)
hole "Hole3" at (-143.8811, 3.175, 19.8473) at (-131.905, 3.175, 7.874) at (-143.8811, 3.175, 77.0001) at (-143.8811, 3.175, 134.1529) at (-131.905, 3.175, 146.1262) at (-74.755, 3.175, 146.1262) at (-17.605, 3.175, 146.1262) at (-5.6289, 3.175, 134.1529) at (-5.6289, 3.175, 77.0001) at (-5.6289, 3.175, 19.8473) at (-17.605, 3.175, 7.874) at (-74.755, 3.175, 7.874) direction (0, -1, 0) diameter 4.4958 end through all clearance for "Flat Head Machine Screw (82)" size "#8" standard "Ansi Unified Screw Threads"
equation "\"d16\" = d18"
equation "\"d17\" = d16"
equation "\"d19\" = d18"
equation "\"d20\" = d23"
equation "\"d21\" = d23"
equation "\"d22\" = d23"
equation "\"d62\" = d61"
equation "\"d63\" = d61"
equation "\"d64\" = d61"
equation "\"d65\" = Thickness"
equation "\"d81\" = Thickness"
equation "\"d88\" = Thickness"
equation "\"BendRadius\" = Thickness"
equation "\"BendReliefWidth\" = Thickness"
equation "\"BendReliefDepth\" = 0.5 * Thickness"
equation "\"CornerReliefSize\" = 4 * Thickness"
equation "\"MinimumRemnant\" = 2 * Thickness"
equation "\"TransitionRadius\" = BendRadius"
equation "\"JacobiRadiusSize\" = BendRadius"
equation "\"GapSize\" = Thickness"
equation "\"d59\" = BendRadius"
equation "\"Thickness\" = 3.175"
properties part number "BottomBasePlate_Rev2" material "Aluminum 6061"
